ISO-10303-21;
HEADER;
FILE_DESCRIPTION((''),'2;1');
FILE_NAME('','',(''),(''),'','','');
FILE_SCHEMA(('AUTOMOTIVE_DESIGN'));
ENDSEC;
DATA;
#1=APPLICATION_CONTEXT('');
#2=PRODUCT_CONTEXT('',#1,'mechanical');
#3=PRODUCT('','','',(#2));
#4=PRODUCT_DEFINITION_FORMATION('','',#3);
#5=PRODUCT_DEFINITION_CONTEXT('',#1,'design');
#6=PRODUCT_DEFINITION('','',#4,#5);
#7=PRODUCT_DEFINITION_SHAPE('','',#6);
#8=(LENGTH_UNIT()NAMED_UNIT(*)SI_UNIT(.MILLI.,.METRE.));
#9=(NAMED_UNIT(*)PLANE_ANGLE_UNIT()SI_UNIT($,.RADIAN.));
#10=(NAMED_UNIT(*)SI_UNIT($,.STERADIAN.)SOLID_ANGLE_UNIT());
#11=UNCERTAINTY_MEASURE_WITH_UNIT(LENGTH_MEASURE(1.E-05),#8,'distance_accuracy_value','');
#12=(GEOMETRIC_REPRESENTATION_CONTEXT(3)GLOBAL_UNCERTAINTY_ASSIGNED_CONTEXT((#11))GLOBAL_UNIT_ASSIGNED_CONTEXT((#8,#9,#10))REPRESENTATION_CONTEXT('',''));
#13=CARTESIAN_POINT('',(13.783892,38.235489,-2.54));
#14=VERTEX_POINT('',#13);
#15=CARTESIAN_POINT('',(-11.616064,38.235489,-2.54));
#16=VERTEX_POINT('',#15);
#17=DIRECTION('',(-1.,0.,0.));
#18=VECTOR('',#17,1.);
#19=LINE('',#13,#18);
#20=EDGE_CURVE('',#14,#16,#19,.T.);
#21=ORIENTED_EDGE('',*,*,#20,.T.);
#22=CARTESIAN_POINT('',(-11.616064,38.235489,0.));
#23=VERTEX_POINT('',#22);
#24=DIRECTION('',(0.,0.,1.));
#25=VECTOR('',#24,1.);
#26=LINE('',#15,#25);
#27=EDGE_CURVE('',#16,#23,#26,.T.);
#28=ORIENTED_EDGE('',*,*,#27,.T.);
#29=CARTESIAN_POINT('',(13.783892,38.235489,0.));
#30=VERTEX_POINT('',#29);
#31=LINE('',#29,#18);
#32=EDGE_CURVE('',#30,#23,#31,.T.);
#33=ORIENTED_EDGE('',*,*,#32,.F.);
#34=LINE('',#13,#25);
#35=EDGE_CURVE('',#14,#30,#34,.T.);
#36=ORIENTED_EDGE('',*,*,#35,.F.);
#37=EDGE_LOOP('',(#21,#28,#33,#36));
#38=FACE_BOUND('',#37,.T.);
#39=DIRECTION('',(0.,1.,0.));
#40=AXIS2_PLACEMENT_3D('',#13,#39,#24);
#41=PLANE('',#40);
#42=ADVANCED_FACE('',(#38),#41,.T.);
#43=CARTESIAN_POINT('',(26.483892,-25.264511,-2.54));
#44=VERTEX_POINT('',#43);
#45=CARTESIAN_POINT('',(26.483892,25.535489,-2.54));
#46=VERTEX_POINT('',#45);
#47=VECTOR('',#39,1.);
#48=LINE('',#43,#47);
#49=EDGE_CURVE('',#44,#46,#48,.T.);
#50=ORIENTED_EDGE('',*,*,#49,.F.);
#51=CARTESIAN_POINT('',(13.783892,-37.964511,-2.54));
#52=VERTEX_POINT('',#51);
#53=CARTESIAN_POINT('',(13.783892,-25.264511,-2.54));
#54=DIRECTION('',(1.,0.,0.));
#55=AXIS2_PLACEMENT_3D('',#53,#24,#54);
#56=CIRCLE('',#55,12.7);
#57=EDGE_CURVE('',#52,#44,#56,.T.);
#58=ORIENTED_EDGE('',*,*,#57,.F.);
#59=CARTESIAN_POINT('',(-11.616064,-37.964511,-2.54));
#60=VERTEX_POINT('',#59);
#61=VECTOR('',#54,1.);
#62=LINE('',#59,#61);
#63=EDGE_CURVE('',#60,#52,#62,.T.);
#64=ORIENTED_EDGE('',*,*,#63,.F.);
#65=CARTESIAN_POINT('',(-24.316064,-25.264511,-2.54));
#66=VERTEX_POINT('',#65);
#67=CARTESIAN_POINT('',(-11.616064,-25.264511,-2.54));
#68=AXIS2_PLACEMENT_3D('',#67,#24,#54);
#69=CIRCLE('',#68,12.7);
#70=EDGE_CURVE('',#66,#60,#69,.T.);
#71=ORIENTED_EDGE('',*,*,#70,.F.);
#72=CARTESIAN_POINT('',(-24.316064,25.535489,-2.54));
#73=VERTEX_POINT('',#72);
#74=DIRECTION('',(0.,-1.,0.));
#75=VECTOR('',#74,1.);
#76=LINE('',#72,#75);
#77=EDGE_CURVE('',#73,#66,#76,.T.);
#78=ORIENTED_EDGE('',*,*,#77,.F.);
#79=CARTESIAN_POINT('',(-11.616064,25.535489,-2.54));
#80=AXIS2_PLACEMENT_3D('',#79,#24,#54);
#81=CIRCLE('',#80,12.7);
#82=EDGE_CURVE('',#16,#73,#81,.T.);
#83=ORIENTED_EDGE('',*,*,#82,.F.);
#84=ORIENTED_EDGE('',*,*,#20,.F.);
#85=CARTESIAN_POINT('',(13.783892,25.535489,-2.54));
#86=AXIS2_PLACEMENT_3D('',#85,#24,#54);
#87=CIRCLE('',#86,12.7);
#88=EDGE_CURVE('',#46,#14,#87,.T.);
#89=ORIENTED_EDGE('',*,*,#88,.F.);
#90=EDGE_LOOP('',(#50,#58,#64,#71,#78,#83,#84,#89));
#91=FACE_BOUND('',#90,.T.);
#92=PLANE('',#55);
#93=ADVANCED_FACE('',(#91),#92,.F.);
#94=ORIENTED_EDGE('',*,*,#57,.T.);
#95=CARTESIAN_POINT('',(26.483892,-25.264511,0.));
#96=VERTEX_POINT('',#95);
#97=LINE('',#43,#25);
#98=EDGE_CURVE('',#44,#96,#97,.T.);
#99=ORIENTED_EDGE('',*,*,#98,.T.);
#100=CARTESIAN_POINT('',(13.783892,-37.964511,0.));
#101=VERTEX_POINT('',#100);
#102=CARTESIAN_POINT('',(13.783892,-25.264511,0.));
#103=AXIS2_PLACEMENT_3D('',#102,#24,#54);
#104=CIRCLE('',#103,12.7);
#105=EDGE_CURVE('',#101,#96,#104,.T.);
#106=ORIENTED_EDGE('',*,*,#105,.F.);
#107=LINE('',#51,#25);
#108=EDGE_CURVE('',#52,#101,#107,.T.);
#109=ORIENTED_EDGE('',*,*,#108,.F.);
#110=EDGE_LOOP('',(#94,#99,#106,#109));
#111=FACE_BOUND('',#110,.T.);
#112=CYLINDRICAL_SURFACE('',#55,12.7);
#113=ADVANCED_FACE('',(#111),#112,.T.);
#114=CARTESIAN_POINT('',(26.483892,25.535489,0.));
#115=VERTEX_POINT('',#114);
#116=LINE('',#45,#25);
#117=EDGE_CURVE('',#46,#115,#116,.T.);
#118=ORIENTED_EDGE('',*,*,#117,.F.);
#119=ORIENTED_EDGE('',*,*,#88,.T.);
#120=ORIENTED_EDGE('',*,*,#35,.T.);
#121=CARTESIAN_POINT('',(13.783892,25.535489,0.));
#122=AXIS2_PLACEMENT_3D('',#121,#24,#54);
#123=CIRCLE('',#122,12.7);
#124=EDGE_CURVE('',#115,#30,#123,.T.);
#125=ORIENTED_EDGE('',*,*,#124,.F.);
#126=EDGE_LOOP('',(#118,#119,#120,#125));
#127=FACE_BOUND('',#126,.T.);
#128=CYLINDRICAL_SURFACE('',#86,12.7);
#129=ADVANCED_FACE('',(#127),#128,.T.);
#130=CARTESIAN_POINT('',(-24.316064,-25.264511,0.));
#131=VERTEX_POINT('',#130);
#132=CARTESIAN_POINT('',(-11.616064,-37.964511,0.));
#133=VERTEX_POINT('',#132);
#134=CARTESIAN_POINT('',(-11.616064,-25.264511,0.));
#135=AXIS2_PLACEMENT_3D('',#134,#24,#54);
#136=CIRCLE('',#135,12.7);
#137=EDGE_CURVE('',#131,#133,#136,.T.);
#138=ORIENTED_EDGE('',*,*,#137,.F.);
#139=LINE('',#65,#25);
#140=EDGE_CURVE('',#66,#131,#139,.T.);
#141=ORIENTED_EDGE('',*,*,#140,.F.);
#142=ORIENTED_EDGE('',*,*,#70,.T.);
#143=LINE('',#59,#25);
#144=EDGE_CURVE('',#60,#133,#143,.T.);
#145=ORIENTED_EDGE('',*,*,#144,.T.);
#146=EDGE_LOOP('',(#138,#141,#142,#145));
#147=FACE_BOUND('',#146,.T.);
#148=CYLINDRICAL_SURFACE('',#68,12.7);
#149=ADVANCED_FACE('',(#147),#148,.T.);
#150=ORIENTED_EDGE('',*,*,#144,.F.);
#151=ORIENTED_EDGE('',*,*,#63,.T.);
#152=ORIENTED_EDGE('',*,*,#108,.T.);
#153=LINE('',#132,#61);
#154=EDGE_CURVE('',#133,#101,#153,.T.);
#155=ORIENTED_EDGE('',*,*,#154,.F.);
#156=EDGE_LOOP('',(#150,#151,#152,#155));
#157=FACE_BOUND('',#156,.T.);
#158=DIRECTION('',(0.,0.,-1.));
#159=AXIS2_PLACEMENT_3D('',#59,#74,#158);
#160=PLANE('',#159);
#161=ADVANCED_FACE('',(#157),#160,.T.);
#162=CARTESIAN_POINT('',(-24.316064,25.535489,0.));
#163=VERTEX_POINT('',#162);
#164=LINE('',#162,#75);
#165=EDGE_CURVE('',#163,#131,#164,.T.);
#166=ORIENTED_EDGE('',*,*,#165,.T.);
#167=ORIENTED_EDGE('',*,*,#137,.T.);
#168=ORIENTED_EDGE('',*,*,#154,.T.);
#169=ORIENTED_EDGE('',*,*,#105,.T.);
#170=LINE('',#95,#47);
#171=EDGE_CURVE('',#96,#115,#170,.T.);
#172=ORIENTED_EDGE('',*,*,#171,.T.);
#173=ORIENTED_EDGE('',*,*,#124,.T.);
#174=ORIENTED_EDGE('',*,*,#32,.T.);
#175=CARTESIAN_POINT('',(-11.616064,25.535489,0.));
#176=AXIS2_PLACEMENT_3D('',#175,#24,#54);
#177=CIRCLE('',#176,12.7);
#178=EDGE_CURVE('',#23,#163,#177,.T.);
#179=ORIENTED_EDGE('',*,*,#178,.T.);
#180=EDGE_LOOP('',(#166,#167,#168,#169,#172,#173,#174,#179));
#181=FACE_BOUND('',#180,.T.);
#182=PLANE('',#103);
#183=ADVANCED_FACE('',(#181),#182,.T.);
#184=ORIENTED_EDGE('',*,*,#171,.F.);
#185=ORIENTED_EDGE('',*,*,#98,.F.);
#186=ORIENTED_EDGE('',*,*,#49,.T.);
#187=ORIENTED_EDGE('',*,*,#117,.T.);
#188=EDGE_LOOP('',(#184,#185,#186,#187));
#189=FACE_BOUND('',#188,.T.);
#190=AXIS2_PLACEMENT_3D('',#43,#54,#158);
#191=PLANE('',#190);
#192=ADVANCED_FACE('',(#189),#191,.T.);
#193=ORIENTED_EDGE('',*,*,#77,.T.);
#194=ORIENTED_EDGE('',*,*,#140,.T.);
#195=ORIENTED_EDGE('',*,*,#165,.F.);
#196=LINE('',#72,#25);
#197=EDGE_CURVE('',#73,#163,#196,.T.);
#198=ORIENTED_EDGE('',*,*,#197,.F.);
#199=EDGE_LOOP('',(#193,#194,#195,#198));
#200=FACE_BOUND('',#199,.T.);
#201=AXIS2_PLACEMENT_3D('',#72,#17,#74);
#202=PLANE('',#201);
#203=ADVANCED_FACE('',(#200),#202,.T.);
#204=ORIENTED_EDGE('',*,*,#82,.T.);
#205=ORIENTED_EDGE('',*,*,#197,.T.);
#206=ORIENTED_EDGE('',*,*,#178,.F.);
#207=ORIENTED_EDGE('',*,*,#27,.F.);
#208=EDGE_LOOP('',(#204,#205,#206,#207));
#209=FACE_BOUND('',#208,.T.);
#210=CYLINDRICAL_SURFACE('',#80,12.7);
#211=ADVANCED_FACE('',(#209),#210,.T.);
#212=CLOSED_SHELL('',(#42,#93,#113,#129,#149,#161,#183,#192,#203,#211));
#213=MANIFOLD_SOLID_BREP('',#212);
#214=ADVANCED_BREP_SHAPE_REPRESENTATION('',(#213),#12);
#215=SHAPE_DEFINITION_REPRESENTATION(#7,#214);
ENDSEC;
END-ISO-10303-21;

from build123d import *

# Parameters (mm, degrees)
BASE_FLANGE1_DEPTH = 2.54


# Sheet-metal steps are written as plain solids
with BuildPart() as part:
    # Sketch1 → Base-Flange1 (new body)
    with BuildSketch(Plane.XY):
        with BuildLine():
            Line((26.483892015, -25.264510752), (26.483892015, 25.535489248))
            ThreePointArc((26.483892015, 25.535489248), (22.764148136, 34.515745369), (13.783892015, 38.235489248))
            Line((13.783892015, 38.235489248), (-11.616064043, 38.235489248))
            ThreePointArc((-11.616064043, 38.235489248), (-20.596320164, 34.515745369), (-24.316064043, 25.535489248))
            Line((-24.316064043, 25.535489248), (-24.316064043, -25.264510752))
            ThreePointArc((-24.316064043, -25.264510752), (-20.596320164, -34.244766873), (-11.616064043, -37.964510752))
            Line((-11.616064043, -37.964510752), (13.783892015, -37.964510752))
            ThreePointArc((13.783892015, -37.964510752), (22.764148136, -34.244766873), (26.483892015, -25.264510752))
        make_face()
    extrude(amount=-BASE_FLANGE1_DEPTH)


solid = part.part
